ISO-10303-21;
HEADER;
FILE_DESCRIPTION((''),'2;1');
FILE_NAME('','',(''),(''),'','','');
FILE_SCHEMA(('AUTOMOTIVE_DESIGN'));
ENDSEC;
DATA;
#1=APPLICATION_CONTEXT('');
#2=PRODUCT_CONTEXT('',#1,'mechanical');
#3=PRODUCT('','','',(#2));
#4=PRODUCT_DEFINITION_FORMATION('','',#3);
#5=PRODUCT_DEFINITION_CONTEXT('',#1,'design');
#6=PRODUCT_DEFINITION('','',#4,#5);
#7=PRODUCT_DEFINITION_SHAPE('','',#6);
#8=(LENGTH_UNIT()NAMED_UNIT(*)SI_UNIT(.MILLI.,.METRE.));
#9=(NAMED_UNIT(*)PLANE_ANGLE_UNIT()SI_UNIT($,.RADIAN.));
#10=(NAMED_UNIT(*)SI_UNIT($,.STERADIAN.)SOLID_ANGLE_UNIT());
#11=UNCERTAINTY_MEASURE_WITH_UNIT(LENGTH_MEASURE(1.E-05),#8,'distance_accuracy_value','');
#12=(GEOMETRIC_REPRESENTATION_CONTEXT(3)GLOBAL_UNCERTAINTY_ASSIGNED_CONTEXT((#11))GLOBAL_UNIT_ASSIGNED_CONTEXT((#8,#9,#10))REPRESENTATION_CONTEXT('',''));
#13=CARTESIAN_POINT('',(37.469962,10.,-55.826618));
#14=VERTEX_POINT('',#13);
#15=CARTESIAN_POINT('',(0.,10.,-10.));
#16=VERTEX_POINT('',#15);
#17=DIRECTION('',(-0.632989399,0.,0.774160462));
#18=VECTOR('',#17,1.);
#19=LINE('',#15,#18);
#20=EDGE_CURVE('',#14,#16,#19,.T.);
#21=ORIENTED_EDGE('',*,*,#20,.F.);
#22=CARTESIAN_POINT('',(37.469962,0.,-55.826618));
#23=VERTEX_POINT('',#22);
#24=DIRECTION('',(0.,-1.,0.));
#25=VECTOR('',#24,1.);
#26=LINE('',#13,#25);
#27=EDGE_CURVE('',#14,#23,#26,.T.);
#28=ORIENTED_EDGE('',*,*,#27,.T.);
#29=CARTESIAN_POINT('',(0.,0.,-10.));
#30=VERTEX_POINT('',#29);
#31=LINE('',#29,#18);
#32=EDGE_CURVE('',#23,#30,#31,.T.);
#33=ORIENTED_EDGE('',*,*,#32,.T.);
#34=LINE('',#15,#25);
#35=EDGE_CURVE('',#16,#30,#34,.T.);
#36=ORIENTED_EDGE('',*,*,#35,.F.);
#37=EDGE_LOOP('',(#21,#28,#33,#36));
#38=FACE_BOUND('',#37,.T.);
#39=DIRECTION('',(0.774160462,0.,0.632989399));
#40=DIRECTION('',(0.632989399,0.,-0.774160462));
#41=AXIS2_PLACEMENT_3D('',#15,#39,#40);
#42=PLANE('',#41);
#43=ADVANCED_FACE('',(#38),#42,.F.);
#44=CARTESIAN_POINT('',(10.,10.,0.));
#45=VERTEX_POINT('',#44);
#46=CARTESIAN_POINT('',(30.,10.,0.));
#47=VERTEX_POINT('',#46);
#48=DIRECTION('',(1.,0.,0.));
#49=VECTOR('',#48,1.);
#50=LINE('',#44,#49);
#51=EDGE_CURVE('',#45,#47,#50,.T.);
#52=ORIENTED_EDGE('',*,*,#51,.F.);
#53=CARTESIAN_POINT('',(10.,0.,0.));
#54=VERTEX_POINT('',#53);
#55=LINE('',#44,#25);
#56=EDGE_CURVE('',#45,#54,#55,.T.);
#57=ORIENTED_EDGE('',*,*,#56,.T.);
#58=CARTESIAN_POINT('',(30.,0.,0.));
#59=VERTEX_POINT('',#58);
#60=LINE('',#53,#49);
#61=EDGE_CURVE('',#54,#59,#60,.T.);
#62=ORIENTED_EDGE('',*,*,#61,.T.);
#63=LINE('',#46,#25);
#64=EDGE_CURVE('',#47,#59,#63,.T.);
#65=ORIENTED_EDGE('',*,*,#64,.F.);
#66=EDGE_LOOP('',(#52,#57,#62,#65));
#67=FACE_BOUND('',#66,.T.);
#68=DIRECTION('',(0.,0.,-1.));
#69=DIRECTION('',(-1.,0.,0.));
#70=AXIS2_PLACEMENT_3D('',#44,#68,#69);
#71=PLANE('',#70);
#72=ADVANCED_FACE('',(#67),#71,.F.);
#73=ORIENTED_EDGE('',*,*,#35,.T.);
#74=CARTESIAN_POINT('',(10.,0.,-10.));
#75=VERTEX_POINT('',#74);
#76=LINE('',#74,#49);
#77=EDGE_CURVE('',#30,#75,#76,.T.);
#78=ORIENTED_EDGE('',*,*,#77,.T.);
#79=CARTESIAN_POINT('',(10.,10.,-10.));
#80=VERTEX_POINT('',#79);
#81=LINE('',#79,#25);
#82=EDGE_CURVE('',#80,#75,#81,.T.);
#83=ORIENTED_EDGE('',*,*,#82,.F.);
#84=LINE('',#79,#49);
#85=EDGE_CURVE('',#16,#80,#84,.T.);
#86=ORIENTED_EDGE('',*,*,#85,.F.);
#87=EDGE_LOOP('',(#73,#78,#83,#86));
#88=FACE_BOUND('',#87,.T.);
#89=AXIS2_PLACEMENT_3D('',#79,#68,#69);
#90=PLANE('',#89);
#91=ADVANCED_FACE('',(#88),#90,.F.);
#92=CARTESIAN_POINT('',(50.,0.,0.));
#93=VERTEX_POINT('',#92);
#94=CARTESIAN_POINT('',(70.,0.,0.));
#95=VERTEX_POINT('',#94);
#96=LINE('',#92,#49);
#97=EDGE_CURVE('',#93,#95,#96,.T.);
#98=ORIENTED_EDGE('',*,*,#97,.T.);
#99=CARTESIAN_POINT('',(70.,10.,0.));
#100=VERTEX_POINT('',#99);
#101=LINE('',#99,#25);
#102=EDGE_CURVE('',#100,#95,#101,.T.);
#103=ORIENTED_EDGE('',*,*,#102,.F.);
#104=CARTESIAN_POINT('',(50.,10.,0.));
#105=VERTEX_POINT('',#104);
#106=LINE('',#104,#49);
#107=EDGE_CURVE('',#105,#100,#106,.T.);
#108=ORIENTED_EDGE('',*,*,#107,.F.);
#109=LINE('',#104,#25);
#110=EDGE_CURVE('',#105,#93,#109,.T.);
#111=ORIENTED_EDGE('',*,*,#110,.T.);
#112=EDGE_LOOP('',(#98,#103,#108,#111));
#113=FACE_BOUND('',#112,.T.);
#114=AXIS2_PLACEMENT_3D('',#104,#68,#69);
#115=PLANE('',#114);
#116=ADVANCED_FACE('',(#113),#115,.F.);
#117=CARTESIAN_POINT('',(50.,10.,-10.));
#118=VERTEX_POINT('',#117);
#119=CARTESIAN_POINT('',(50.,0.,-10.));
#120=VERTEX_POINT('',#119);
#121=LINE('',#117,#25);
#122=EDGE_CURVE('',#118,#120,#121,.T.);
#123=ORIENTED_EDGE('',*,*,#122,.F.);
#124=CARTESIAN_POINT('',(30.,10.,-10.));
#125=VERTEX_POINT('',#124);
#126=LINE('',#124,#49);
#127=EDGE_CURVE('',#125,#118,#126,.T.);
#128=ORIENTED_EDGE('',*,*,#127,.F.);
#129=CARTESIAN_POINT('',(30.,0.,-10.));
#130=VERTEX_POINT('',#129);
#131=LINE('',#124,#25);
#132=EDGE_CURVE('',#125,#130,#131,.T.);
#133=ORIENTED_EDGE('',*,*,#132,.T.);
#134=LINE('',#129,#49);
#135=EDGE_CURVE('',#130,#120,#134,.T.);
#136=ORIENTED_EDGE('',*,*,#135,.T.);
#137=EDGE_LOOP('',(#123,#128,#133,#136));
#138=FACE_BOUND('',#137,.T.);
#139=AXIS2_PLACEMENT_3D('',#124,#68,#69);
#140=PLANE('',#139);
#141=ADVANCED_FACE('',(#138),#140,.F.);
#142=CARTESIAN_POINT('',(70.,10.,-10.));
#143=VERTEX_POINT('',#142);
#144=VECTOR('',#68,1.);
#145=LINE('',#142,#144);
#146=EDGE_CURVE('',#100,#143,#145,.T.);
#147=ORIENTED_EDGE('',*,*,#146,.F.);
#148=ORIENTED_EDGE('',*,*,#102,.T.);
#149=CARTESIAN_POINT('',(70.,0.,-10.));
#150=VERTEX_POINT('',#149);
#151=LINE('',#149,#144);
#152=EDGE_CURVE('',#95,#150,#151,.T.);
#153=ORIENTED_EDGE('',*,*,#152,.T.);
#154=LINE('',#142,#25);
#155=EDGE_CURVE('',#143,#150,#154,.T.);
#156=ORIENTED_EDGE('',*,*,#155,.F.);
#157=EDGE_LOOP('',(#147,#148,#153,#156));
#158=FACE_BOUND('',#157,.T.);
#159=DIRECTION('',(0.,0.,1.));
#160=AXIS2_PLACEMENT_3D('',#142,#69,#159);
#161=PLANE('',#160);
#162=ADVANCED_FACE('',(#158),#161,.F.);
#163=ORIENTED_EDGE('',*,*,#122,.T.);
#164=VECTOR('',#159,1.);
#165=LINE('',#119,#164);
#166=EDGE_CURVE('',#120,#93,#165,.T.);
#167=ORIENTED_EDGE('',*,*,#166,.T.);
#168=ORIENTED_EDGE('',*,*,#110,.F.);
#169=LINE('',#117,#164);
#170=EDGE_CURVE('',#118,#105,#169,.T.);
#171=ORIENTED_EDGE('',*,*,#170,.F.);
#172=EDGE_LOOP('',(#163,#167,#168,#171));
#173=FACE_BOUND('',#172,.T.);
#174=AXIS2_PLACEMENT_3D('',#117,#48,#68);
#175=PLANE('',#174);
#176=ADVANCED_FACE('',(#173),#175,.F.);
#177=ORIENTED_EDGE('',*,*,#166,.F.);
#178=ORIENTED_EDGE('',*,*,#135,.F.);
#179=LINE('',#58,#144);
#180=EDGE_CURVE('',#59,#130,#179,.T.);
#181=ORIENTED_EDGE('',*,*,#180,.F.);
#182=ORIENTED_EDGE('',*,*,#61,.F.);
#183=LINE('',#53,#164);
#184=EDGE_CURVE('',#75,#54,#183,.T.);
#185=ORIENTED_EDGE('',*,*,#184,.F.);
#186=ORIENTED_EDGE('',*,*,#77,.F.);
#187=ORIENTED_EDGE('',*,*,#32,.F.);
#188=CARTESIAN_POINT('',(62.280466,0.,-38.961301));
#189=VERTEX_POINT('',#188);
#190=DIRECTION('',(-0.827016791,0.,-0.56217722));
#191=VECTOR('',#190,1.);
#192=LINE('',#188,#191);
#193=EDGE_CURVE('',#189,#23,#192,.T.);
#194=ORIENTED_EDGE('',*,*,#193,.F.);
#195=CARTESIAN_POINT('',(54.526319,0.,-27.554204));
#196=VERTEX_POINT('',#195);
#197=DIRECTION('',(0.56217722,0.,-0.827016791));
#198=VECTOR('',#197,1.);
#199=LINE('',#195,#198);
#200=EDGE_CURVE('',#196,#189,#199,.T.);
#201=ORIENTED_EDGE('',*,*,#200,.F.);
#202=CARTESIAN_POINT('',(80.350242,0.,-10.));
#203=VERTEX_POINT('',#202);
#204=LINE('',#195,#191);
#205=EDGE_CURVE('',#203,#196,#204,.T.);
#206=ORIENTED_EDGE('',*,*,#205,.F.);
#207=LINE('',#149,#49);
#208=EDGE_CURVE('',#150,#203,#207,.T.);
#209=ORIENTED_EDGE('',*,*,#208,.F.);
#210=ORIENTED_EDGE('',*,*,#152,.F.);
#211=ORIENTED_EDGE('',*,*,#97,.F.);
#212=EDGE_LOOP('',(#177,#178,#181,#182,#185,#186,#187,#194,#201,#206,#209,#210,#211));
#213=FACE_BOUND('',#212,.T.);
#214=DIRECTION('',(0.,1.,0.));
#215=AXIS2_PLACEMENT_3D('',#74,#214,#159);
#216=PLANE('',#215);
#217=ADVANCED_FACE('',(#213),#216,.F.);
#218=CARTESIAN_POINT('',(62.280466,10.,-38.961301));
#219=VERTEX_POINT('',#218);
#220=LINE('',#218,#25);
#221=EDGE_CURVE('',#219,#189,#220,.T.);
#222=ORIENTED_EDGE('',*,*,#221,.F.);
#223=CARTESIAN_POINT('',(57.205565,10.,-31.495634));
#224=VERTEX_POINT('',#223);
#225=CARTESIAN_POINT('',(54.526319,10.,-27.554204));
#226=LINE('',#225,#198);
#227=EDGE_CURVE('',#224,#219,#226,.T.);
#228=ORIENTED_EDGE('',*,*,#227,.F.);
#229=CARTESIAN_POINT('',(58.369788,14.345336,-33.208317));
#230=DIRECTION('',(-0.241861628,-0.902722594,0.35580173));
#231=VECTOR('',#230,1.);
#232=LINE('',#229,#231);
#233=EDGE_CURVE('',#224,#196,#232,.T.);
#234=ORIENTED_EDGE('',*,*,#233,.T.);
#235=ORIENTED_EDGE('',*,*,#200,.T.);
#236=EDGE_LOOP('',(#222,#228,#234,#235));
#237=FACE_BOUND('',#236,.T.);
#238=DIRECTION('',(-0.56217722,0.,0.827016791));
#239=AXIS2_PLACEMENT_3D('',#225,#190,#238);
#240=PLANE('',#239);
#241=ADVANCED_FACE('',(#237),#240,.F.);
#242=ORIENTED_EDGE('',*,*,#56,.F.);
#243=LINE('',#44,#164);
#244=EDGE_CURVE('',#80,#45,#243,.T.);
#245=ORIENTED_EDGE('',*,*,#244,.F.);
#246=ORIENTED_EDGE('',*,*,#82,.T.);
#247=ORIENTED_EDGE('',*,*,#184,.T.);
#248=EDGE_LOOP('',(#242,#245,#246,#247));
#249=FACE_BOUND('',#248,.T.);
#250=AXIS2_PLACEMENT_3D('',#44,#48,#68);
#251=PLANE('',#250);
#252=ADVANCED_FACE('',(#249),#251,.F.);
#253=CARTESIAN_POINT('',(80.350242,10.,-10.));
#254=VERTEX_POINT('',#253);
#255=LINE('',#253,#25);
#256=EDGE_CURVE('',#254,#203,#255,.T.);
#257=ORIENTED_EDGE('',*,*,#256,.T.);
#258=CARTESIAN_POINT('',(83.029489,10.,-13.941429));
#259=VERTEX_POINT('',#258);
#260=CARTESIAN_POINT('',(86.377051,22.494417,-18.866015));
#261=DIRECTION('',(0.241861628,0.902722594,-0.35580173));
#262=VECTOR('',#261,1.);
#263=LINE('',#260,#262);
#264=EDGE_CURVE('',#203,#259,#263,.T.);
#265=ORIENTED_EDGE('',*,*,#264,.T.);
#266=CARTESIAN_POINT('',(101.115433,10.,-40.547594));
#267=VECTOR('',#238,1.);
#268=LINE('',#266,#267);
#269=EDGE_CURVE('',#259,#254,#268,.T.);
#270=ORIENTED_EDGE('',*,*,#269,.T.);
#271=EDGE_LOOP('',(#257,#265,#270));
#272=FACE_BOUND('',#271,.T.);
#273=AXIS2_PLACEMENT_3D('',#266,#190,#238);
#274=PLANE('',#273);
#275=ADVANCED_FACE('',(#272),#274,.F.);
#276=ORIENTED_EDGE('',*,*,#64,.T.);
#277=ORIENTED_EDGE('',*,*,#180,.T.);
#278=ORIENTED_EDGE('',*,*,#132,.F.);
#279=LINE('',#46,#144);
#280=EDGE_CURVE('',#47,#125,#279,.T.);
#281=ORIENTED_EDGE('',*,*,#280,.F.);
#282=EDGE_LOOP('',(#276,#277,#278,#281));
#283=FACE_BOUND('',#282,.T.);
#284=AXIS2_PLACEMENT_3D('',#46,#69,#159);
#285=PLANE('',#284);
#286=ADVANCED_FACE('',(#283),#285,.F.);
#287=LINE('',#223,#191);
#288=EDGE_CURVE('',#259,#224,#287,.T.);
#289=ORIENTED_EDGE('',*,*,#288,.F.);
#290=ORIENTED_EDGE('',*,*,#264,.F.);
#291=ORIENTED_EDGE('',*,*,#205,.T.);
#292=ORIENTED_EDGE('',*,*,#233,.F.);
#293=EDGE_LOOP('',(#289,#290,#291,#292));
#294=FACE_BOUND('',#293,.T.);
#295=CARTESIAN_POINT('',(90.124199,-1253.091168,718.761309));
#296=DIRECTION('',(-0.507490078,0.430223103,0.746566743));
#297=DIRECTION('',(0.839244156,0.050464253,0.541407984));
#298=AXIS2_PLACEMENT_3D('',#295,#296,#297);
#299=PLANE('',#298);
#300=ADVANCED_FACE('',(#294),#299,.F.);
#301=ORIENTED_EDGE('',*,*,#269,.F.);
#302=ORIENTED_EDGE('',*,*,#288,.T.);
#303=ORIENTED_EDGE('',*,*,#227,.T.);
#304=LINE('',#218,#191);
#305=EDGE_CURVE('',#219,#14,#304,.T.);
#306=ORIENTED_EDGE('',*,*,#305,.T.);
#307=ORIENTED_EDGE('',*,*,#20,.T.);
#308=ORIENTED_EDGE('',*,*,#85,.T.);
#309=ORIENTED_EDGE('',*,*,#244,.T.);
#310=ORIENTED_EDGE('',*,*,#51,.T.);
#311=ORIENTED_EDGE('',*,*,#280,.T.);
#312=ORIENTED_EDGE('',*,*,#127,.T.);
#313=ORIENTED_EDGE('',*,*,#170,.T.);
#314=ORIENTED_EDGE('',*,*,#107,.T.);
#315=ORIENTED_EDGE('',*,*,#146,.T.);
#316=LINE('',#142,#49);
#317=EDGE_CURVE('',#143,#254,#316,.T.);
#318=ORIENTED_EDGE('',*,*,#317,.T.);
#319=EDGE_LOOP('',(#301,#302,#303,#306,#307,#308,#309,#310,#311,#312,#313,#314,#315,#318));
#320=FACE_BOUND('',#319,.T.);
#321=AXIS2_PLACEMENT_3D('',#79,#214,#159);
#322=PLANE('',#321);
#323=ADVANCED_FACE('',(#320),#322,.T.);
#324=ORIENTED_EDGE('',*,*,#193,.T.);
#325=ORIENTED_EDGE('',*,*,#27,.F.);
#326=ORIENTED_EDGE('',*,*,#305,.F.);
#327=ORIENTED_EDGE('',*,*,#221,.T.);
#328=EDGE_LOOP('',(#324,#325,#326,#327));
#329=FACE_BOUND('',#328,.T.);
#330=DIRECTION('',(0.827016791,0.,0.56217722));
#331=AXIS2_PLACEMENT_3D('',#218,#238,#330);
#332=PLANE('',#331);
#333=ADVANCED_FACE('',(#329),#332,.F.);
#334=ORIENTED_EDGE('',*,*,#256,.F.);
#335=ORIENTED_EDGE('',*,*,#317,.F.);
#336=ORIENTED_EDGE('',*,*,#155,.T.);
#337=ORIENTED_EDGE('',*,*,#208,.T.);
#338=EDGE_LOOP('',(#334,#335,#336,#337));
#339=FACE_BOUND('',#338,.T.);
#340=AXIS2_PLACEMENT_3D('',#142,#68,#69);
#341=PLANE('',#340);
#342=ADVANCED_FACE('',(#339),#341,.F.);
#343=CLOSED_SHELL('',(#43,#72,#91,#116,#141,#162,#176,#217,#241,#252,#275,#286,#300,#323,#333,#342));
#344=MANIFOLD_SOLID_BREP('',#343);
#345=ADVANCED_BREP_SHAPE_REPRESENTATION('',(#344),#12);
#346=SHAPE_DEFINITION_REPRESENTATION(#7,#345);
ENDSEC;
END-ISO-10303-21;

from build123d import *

# Parameters (mm, degrees)
BOSS_EXTRUDE1_DEPTH = 10
BOSS_EXTRUDE2_START = 29.60383513
BOSS_EXTRUDE2_DEPTH = 31.225392193


# Read off the part's stored shape, not the designer's step: Boss-Extrude2
with BuildPart() as part:
    # Sketch1 → Boss-Extrude1 (new body)
    with BuildSketch(Plane(origin=(0, 0, 0), x_dir=(1, 0, 0), z_dir=(0, 1, 0))):
        Polygon((10, 0), (10, 10), (0, 10), (37.469962049, 55.82661754), (62.28046579, 38.961300937), (54.526318582, 27.55420418), (80.350242243, 10), (70, 10), (70, 0), (50, 0), (50, 10), (30, 10), (30, 0), align=None)
    extrude(amount=BOSS_EXTRUDE1_DEPTH)

    # Boss-Extrude2 outline → Boss-Extrude2 (add)
    with BuildSketch(Plane(origin=(0, 0, 0), x_dir=(0.562177220107601, 0, -0.8270167913604233), z_dir=(0.8270167913604233, 0, 0.5621772201076011)).offset(BOSS_EXTRUDE2_START)):
        Polygon((53.441243733, 0), (58.207083275, 10), (53.441243733, 10), align=None)
    extrude(amount=BOSS_EXTRUDE2_DEPTH)


solid = part.part
